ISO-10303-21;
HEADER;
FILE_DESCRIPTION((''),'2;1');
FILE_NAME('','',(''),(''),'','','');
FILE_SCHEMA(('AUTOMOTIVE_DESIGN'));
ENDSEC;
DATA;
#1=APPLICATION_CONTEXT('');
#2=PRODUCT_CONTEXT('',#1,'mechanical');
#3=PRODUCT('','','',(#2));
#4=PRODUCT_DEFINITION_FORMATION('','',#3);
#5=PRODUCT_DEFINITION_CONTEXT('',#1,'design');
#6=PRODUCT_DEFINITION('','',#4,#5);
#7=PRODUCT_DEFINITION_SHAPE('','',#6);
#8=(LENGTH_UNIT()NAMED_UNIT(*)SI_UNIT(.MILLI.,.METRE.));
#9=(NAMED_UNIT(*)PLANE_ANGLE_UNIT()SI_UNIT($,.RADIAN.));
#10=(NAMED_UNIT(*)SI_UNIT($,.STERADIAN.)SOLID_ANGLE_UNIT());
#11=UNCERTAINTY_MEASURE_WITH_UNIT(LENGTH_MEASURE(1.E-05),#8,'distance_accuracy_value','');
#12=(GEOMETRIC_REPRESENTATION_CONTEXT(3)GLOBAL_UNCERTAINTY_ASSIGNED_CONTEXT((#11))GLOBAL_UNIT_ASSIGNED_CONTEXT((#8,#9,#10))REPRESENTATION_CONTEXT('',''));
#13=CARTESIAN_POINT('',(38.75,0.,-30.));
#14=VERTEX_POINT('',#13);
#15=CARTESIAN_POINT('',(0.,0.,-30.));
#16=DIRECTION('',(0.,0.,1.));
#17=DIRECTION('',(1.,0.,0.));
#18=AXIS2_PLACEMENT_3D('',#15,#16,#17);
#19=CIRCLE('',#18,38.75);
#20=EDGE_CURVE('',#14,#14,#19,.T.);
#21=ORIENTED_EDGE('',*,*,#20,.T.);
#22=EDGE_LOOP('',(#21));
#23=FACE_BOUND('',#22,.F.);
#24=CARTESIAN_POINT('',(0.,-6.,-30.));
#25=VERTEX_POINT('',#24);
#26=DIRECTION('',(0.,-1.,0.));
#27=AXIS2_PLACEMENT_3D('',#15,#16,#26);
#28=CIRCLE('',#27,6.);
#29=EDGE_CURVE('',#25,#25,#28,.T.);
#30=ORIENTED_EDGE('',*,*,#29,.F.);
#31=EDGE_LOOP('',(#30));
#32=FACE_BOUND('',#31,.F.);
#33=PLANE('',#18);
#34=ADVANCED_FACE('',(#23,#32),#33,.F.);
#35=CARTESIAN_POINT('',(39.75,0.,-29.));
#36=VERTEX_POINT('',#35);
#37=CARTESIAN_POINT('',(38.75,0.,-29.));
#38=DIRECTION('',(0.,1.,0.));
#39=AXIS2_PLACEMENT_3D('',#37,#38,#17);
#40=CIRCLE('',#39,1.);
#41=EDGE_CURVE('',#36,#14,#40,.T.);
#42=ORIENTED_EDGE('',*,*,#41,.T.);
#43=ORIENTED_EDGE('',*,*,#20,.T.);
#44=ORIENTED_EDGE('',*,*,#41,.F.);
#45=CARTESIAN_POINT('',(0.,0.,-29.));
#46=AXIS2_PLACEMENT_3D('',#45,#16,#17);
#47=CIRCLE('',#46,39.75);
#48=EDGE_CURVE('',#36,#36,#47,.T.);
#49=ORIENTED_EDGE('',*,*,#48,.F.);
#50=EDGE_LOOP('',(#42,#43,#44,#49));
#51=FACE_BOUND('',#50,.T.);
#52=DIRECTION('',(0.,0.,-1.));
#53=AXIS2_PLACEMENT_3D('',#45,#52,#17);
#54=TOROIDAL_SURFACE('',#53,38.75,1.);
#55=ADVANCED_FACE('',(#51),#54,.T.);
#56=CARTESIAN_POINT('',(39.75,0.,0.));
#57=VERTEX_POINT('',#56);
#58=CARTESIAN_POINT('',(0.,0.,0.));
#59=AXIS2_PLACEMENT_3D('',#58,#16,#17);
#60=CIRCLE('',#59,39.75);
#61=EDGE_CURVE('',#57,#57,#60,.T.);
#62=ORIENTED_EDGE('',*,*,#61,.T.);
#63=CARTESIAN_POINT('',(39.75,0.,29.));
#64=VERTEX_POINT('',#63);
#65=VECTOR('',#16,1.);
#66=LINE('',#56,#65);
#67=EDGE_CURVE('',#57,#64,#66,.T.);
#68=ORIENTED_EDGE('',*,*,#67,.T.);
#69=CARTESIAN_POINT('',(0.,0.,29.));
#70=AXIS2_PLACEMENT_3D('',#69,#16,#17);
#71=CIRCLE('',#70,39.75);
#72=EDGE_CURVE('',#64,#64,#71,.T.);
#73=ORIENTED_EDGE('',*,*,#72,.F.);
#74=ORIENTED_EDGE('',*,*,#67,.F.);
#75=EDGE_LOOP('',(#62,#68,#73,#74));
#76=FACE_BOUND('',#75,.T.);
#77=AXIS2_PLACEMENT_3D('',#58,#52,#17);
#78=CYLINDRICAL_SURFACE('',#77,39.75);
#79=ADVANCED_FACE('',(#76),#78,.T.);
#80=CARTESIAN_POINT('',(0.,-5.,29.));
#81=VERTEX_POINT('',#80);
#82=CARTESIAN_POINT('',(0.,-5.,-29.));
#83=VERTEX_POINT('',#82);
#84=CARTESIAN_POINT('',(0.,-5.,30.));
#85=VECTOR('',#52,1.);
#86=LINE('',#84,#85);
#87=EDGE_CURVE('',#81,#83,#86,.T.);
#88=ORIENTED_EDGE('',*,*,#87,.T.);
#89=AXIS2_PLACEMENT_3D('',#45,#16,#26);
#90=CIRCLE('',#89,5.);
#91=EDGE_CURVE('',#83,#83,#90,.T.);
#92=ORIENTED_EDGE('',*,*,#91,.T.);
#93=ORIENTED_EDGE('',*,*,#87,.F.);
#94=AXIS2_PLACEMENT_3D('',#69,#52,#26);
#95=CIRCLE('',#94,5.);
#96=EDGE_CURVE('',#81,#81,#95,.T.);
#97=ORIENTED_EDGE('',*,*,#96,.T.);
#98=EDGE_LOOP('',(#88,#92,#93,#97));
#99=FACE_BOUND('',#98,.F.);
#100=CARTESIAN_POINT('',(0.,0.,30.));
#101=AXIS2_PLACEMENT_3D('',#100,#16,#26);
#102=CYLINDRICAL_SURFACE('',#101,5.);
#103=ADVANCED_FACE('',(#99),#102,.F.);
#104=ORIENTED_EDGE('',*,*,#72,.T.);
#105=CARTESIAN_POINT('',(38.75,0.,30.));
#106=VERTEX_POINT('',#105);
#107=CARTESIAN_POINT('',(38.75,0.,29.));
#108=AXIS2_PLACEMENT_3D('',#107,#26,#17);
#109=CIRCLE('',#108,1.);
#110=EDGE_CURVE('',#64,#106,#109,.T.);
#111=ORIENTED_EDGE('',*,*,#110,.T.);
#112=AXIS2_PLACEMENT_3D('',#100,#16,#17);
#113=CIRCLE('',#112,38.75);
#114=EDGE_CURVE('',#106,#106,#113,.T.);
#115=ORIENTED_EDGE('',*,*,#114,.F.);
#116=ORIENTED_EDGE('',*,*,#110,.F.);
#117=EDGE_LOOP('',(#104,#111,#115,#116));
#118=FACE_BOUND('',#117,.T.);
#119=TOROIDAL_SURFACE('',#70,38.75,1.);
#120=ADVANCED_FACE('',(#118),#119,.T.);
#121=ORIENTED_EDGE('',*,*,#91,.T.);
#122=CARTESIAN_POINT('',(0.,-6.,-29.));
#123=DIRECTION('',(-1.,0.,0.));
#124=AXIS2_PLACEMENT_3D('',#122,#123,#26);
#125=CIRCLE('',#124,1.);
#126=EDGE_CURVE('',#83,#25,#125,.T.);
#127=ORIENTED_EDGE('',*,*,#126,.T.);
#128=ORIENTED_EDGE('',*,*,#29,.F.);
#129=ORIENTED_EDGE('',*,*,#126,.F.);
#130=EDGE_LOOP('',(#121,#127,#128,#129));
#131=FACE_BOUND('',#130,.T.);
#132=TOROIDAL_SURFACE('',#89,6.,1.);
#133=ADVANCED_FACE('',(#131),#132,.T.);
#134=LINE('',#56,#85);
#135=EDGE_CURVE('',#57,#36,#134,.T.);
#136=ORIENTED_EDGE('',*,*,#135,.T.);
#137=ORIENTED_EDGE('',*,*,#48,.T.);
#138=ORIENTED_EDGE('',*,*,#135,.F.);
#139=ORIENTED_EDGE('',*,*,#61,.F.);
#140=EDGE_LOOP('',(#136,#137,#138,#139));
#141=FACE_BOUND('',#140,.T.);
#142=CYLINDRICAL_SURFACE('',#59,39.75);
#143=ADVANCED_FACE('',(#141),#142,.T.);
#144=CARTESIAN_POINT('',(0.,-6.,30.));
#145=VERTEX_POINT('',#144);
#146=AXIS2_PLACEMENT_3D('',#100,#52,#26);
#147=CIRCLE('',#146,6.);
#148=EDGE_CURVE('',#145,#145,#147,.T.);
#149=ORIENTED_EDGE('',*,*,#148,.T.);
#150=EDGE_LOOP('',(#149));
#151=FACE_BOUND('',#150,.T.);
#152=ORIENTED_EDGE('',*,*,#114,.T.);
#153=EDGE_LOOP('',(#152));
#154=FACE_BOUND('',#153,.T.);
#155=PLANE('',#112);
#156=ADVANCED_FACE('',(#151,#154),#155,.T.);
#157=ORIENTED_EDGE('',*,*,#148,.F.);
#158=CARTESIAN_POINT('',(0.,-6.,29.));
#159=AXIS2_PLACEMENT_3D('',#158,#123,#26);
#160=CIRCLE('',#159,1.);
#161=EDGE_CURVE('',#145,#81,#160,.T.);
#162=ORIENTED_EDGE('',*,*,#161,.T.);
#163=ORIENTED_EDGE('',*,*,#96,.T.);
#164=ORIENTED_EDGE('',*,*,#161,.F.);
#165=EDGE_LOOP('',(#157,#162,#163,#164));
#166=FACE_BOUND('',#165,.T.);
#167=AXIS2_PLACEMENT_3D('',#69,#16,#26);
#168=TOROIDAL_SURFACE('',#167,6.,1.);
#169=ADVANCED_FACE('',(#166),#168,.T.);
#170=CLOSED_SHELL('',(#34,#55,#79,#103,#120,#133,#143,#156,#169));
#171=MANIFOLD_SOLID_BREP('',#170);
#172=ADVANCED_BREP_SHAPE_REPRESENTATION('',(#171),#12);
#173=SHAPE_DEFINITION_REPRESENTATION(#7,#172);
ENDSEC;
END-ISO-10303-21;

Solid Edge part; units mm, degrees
sketch "Sketch1" plane through (0, 0, 0) normal (0, 0, 1) x (1, 0, 0)
  circle A0 centre (0, 0) radius 39.75
  dimension "D1" = 79.5
extrude "ExtrudedProtrusion_1" add sketch "Sketch1" along normal mid plane 60
fillet "Round_1" radius 1 2 edges at (-39.75, 0, 30) (-39.75, 0, -30)
hole "Hole_1" at (0, 0, 30) direction (0, 0, -1) diameter 10 end up to next
fillet "Round_2" radius 1 2 edges at (-5, 0, 30) (5, 0, -30)
properties material "Acrylic, high impact grade"
